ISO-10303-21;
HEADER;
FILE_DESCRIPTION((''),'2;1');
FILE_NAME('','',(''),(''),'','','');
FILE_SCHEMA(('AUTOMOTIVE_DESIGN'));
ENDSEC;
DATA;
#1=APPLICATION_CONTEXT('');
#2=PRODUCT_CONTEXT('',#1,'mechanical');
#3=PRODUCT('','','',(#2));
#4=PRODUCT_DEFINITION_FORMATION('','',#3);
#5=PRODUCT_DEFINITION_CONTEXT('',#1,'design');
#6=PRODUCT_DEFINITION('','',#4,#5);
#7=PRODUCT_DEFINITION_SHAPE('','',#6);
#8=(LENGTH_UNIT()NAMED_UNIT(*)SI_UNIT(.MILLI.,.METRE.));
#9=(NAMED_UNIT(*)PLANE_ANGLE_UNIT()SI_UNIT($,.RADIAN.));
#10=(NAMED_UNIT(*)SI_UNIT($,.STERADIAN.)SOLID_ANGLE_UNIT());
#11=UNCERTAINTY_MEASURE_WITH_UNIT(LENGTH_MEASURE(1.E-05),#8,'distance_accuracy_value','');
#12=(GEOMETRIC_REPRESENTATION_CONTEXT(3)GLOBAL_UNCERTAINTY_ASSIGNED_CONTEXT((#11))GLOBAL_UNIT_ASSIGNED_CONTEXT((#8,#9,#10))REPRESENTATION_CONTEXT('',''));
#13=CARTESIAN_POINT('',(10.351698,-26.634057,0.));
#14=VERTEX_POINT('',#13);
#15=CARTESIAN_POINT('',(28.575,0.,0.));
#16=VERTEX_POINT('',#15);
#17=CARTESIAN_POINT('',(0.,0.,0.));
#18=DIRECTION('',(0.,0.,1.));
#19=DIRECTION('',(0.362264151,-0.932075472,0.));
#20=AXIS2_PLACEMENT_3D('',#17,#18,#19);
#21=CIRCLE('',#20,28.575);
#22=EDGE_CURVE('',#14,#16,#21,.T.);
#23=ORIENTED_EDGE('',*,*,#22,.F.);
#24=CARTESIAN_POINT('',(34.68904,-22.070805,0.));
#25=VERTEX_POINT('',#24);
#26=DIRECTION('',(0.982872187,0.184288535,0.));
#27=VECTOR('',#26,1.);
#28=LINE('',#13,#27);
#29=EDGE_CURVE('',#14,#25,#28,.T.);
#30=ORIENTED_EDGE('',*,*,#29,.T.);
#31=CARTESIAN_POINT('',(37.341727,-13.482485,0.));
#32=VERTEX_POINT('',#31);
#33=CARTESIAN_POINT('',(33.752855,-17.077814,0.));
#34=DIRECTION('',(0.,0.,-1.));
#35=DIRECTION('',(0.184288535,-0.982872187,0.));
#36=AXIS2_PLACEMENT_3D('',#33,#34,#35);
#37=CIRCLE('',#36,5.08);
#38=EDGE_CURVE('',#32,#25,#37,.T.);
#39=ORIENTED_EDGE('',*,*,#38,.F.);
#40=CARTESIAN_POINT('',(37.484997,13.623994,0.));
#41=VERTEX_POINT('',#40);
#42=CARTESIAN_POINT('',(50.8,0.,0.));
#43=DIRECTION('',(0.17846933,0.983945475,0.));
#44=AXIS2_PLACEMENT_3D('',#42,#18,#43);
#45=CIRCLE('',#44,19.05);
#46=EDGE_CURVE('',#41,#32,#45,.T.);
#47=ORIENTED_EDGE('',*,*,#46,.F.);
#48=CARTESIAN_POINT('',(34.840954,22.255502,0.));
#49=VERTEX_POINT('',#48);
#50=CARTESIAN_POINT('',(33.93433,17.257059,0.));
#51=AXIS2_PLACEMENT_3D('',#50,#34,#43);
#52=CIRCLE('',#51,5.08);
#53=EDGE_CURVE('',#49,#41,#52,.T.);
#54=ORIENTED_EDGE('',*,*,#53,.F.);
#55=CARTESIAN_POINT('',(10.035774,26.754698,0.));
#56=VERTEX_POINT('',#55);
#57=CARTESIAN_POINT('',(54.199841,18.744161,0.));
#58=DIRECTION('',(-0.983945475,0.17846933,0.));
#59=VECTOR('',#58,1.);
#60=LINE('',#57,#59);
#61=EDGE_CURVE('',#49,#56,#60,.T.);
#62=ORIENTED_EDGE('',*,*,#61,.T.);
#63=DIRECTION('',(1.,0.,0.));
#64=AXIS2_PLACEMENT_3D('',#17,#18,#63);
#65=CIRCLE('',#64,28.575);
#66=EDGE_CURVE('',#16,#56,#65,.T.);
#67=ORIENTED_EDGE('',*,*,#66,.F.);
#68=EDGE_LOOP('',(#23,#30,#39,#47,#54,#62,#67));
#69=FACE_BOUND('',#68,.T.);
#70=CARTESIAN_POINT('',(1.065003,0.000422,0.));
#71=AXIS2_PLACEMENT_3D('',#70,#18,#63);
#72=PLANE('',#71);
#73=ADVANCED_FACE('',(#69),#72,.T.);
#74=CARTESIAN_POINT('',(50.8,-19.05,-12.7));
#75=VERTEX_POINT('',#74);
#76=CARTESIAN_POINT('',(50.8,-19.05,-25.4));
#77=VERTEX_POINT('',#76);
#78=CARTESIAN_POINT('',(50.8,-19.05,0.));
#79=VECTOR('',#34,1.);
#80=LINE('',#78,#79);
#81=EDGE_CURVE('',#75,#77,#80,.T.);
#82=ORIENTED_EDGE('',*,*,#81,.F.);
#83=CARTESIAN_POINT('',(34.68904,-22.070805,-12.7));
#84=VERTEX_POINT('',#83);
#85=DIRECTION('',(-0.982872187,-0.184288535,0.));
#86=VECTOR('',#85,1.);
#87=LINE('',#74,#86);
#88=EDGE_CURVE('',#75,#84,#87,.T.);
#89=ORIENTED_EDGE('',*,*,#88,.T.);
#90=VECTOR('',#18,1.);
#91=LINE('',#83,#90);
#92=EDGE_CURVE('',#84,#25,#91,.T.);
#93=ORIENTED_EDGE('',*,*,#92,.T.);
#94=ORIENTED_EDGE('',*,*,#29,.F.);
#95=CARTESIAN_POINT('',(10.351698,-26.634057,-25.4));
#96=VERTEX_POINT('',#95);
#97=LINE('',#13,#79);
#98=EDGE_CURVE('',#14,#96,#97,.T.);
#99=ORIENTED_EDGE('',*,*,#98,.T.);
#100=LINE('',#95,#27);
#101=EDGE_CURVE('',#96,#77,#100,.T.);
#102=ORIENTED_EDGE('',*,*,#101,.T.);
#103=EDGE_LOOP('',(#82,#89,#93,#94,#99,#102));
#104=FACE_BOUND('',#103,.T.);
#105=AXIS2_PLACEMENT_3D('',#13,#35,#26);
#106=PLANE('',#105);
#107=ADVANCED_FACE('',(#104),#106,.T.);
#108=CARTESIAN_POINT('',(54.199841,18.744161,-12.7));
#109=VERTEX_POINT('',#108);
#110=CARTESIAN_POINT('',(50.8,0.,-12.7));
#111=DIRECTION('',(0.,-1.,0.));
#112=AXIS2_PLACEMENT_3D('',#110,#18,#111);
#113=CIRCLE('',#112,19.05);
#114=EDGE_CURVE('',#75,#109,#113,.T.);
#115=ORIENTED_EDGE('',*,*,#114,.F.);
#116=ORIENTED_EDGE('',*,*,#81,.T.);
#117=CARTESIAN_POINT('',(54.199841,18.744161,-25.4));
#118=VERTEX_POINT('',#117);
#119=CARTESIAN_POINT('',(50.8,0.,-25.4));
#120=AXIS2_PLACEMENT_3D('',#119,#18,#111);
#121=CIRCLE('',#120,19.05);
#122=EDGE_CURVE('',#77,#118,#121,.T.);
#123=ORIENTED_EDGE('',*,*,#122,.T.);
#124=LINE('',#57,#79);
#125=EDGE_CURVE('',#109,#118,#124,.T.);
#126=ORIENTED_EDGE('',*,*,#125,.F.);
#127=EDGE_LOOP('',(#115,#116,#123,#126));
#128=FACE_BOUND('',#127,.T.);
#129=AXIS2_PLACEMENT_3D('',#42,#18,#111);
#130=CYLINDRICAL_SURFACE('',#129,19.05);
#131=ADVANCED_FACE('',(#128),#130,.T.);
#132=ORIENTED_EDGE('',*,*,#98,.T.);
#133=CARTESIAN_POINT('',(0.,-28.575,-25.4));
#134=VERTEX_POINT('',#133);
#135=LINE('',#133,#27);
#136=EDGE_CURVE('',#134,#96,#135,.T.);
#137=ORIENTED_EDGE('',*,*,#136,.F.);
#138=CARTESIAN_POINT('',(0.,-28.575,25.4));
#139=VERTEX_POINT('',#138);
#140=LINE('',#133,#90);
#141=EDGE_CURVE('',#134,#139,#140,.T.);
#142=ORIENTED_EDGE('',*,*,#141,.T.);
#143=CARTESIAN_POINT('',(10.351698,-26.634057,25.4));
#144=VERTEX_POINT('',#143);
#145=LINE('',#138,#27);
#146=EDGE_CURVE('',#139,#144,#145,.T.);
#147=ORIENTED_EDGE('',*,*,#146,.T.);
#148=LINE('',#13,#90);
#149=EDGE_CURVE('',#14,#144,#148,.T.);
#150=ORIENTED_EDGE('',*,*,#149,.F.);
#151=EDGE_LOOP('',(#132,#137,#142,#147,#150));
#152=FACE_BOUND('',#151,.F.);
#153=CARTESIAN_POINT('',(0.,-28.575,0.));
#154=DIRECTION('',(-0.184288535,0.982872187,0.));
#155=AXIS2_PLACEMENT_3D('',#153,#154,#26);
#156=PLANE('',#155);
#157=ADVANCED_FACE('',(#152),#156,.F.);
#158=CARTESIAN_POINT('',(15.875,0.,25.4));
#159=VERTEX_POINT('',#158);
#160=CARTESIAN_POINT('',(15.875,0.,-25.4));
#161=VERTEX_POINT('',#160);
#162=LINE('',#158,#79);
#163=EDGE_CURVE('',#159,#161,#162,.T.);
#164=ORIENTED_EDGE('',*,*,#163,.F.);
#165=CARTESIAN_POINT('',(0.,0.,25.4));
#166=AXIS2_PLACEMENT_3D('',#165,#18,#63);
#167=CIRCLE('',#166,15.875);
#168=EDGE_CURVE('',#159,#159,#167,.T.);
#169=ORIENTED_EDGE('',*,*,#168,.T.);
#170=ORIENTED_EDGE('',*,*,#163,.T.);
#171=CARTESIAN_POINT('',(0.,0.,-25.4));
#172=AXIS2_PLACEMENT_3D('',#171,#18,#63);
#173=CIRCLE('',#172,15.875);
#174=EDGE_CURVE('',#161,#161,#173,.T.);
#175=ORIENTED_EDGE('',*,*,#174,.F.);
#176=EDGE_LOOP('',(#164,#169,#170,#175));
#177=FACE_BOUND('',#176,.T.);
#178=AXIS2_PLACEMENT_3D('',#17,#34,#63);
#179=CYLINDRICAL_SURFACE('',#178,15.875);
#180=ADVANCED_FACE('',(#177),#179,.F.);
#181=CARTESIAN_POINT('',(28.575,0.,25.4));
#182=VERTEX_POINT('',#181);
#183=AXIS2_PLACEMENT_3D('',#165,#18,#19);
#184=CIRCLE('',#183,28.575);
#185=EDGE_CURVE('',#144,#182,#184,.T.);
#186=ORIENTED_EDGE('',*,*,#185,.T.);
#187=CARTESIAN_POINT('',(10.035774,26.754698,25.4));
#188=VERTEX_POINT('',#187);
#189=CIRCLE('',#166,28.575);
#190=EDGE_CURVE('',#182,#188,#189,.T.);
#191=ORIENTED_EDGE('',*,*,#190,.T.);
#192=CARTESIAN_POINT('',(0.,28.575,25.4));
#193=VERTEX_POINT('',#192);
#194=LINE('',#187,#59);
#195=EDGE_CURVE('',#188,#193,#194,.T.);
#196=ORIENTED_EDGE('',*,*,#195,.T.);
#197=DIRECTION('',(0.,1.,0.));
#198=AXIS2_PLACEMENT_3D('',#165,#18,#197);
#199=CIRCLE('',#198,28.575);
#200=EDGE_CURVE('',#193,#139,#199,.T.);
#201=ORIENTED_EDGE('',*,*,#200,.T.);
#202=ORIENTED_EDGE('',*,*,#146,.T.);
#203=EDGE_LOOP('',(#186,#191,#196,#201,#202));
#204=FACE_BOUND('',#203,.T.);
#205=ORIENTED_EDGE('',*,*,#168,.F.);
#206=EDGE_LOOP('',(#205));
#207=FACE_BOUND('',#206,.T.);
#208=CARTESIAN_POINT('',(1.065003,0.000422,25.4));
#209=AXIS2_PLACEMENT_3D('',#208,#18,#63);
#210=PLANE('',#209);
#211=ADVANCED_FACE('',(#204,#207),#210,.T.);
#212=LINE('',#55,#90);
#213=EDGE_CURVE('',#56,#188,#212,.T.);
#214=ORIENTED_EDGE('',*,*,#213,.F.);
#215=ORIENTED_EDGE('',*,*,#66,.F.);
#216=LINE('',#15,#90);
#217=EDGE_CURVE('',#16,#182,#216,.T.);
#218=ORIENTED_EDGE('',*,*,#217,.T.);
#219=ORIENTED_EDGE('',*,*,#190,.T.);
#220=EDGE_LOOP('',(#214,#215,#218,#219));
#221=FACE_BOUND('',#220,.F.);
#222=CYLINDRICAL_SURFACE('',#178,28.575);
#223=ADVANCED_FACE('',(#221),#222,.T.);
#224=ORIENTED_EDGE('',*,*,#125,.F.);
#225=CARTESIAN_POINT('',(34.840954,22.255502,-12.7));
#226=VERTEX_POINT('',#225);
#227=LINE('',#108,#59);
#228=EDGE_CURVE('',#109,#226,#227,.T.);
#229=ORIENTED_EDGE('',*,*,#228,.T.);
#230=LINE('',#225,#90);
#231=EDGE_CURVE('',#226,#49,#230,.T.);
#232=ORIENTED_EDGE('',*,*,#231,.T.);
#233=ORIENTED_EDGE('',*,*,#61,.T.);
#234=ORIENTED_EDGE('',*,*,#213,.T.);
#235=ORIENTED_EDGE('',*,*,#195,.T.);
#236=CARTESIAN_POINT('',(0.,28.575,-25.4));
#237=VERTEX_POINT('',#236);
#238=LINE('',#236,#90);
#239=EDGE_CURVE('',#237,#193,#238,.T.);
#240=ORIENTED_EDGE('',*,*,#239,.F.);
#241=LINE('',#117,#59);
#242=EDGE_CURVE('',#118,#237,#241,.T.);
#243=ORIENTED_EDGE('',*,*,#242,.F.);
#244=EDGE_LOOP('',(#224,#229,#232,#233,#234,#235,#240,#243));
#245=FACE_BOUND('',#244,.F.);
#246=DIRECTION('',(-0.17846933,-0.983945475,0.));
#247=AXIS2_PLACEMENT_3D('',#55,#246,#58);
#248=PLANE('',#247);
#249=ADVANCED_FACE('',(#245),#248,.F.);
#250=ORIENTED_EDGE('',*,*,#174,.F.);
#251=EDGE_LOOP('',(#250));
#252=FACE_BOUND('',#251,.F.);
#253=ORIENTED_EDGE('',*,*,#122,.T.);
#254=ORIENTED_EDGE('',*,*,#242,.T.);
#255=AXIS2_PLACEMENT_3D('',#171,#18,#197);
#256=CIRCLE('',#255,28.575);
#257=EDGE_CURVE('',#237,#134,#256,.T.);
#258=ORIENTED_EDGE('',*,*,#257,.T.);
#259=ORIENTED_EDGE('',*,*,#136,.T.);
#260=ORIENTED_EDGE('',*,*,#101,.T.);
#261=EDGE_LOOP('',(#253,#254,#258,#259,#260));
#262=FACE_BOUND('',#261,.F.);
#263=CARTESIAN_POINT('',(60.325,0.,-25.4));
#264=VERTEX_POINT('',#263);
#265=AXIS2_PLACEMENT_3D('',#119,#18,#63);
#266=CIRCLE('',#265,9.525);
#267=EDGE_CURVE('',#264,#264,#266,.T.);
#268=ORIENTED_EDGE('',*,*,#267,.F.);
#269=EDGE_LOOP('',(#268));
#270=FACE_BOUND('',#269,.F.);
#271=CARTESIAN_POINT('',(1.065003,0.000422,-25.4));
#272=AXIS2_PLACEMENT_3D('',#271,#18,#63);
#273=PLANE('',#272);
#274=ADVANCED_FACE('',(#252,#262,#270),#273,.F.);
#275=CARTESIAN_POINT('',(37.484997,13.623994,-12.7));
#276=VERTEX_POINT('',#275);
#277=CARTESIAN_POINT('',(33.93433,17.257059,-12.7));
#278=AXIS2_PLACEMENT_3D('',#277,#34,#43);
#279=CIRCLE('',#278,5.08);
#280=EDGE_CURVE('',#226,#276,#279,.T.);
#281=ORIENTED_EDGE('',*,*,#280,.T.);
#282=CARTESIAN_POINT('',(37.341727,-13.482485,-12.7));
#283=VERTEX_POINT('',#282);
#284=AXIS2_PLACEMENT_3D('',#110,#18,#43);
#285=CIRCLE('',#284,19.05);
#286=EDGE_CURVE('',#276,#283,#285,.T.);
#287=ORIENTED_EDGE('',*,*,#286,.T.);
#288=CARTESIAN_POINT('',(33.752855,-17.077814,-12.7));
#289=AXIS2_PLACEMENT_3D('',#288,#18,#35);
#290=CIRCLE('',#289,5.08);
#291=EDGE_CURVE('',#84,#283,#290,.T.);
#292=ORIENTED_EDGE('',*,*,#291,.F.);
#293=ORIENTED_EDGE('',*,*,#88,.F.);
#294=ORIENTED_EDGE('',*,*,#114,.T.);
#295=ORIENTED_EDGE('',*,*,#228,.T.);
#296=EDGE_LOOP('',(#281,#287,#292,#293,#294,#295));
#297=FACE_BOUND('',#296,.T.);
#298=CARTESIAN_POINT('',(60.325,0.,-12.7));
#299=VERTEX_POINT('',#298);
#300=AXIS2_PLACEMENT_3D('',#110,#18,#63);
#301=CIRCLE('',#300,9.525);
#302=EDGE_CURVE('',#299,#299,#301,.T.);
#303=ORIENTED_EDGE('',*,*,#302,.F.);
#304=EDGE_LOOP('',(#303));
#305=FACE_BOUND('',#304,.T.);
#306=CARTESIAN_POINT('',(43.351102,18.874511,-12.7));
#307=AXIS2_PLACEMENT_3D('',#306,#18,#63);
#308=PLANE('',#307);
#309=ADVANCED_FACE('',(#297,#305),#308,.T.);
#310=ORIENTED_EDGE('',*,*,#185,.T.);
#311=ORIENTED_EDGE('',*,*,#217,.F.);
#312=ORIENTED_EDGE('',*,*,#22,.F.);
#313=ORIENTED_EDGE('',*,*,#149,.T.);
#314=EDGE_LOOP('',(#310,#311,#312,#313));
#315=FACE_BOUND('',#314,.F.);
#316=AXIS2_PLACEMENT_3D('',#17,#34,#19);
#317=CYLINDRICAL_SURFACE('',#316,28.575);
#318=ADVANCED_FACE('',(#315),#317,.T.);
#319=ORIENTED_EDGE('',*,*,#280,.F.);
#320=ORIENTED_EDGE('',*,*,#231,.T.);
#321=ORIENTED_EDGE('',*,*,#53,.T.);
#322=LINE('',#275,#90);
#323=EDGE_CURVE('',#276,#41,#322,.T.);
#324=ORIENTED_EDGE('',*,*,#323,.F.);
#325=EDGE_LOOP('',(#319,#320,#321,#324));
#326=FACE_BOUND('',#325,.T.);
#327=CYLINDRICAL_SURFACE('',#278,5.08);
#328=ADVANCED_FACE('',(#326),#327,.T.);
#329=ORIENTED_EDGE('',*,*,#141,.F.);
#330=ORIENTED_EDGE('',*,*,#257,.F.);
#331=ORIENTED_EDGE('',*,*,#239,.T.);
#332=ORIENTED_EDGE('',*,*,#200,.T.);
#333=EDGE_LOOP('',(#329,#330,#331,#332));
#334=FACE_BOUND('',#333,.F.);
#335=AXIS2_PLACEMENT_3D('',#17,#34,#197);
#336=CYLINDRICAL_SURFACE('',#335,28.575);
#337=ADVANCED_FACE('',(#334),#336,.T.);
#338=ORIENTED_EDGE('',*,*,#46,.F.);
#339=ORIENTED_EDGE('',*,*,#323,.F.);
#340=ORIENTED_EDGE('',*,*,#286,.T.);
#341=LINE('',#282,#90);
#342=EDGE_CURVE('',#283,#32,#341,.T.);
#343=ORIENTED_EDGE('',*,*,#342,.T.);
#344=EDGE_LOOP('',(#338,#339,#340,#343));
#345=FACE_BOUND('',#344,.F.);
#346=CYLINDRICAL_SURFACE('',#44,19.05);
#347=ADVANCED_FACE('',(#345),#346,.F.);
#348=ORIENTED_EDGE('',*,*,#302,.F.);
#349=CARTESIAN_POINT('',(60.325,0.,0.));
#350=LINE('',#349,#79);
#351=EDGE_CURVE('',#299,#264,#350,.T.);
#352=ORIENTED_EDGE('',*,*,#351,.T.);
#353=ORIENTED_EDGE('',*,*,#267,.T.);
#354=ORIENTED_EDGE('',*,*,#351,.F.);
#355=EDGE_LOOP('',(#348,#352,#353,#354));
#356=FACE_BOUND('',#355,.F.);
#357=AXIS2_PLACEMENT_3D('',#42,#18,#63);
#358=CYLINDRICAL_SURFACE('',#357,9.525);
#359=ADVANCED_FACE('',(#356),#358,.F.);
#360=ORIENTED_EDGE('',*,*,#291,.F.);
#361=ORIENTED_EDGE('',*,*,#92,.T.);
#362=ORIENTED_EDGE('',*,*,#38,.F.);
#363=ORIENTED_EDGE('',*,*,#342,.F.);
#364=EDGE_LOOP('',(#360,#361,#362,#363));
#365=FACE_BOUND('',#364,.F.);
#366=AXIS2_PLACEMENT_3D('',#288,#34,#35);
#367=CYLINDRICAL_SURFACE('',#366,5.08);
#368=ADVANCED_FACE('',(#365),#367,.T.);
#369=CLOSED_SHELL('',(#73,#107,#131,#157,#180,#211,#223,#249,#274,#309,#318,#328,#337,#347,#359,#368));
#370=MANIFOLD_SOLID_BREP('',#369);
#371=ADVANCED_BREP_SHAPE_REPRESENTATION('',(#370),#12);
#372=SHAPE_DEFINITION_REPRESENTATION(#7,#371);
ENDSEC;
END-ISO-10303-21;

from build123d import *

# Parameters (mm, degrees)
F0_R        = 15.875
F0_R_2      = 9.525
F1_DEPTH    = 25.4
F2_DEPTH    = 25.4
F3_DEPTH    = 12.7
F4_T1_DEPTH = 53.6792843218
F4_T3_DEPTH = 61.8868884968


# Not quite as in the source:
# - a fillet or chamfer that OpenCascade refuses, or shapes differently, is made with other operations: its cross-section is extruded or revolved along the edge and cut away or added


with BuildPart() as f1:
    # F0 (on Top) → F1 (new body)
    with BuildSketch(Plane.XY):
        with BuildLine():
            Line((10.035773719, 26.7546981082), (0, 28.575))
            ThreePointArc((0, 28.575), (-28.575, 0), (0, -28.575))
            Line((0, -28.575), (10.3516981132, -26.6340566038))
            ThreePointArc((10.3516981132, -26.6340566038), (23.5831549902, -16.135842888), (28.575, 0))
            ThreePointArc((28.575, 0), (23.4872610048, 16.2751096921), (10.035773719, 26.7546981082))
        make_face()
        Circle(F0_R, mode=Mode.SUBTRACT)
        with BuildLine():
            Line((54.1998407335, 18.7441613039), (10.035773719, 26.7546981082))
            ThreePointArc((10.035773719, 26.7546981082), (23.4872610048, 16.2751096921), (28.575, 0))
            ThreePointArc((28.575, 0), (23.5831549902, -16.135842888), (10.3516981132, -26.6340566038))
            Line((10.3516981132, -26.6340566038), (50.8, -19.05))
            ThreePointArc((50.8, -19.05), (31.8266137334, 1.7067845735), (54.1998407335, 18.7441613039))
        make_face()
        with BuildLine():
            ThreePointArc((69.85, 0), (65.4230890371, 12.2093311452), (54.1998407335, 18.7441613039))
            ThreePointArc((54.1998407335, 18.7441613039), (31.8266137334, 1.7067845735), (50.8, -19.05))
            ThreePointArc((50.8, -19.05), (64.2703841816, -13.4703841816), (69.85, 0))
        make_face()
        with Locations((50.8, 0)):
            Circle(F0_R_2, mode=Mode.SUBTRACT)
    extrude(amount=-F1_DEPTH)

    # F0 (on Top) → F2 (join)
    with BuildSketch(Plane.XY):
        with BuildLine():
            Line((10.035773719, 26.7546981082), (0, 28.575))
            ThreePointArc((0, 28.575), (-28.575, 0), (0, -28.575))
            Line((0, -28.575), (10.3516981132, -26.6340566038))
            ThreePointArc((10.3516981132, -26.6340566038), (23.5831549902, -16.135842888), (28.575, 0))
            ThreePointArc((28.575, 0), (23.4872610048, 16.2751096921), (10.035773719, 26.7546981082))
        make_face()
        Circle(F0_R, mode=Mode.SUBTRACT)
    extrude(amount=F2_DEPTH)

    # F0 (on Top) → F3 (cut)
    with BuildSketch(Plane.XY):
        with BuildLine():
            ThreePointArc((69.85, 0), (65.4230890371, 12.2093311452), (54.1998407335, 18.7441613039))
            ThreePointArc((54.1998407335, 18.7441613039), (31.8266137334, 1.7067845735), (50.8, -19.05))
            ThreePointArc((50.8, -19.05), (64.2703841816, -13.4703841816), (69.85, 0))
        make_face()
        with Locations((50.8, 0)):
            Circle(F0_R_2, mode=Mode.SUBTRACT)
    extrude(amount=-F3_DEPTH, mode=Mode.SUBTRACT)

    # F4: fillet of radius 5.08 on 3 edges, made by hand

    # F4_s2 → F4_t1 (cut)
    with BuildSketch(Plane.XY.offset(-12.7)):
        with BuildLine():
            ThreePointArc((34.6890404798, -22.07080491), (38.6066005598, -18.5769977583), (37.3417274119, -13.4824848951))
            ThreePointArc((37.3417274119, -13.4824848951), (43.5177900762, -17.6031792193), (50.8, -19.05))
            Line((50.8, -19.05), (34.6890404798, -22.07080491))
        make_face()
    extrude(amount=F4_T1_DEPTH, mode=Mode.SUBTRACT)

    # F4_s4 → F4_t3 (cut)
    with BuildSketch(Plane.XY.offset(-12.7)):
        with BuildLine():
            ThreePointArc((34.8409541818, 22.2555017147), (38.7915508617, 18.7449449078), (37.4849973575, 13.6239937108))
            ThreePointArc((37.4849973575, 13.6239937108), (45.2204267219, 18.2145782832), (54.1998407335, 18.7441613039))
            Line((54.1998407335, 18.7441613039), (34.8409541818, 22.2555017147))
        make_face()
    extrude(amount=F4_T3_DEPTH, mode=Mode.SUBTRACT)


solid = f1.part
